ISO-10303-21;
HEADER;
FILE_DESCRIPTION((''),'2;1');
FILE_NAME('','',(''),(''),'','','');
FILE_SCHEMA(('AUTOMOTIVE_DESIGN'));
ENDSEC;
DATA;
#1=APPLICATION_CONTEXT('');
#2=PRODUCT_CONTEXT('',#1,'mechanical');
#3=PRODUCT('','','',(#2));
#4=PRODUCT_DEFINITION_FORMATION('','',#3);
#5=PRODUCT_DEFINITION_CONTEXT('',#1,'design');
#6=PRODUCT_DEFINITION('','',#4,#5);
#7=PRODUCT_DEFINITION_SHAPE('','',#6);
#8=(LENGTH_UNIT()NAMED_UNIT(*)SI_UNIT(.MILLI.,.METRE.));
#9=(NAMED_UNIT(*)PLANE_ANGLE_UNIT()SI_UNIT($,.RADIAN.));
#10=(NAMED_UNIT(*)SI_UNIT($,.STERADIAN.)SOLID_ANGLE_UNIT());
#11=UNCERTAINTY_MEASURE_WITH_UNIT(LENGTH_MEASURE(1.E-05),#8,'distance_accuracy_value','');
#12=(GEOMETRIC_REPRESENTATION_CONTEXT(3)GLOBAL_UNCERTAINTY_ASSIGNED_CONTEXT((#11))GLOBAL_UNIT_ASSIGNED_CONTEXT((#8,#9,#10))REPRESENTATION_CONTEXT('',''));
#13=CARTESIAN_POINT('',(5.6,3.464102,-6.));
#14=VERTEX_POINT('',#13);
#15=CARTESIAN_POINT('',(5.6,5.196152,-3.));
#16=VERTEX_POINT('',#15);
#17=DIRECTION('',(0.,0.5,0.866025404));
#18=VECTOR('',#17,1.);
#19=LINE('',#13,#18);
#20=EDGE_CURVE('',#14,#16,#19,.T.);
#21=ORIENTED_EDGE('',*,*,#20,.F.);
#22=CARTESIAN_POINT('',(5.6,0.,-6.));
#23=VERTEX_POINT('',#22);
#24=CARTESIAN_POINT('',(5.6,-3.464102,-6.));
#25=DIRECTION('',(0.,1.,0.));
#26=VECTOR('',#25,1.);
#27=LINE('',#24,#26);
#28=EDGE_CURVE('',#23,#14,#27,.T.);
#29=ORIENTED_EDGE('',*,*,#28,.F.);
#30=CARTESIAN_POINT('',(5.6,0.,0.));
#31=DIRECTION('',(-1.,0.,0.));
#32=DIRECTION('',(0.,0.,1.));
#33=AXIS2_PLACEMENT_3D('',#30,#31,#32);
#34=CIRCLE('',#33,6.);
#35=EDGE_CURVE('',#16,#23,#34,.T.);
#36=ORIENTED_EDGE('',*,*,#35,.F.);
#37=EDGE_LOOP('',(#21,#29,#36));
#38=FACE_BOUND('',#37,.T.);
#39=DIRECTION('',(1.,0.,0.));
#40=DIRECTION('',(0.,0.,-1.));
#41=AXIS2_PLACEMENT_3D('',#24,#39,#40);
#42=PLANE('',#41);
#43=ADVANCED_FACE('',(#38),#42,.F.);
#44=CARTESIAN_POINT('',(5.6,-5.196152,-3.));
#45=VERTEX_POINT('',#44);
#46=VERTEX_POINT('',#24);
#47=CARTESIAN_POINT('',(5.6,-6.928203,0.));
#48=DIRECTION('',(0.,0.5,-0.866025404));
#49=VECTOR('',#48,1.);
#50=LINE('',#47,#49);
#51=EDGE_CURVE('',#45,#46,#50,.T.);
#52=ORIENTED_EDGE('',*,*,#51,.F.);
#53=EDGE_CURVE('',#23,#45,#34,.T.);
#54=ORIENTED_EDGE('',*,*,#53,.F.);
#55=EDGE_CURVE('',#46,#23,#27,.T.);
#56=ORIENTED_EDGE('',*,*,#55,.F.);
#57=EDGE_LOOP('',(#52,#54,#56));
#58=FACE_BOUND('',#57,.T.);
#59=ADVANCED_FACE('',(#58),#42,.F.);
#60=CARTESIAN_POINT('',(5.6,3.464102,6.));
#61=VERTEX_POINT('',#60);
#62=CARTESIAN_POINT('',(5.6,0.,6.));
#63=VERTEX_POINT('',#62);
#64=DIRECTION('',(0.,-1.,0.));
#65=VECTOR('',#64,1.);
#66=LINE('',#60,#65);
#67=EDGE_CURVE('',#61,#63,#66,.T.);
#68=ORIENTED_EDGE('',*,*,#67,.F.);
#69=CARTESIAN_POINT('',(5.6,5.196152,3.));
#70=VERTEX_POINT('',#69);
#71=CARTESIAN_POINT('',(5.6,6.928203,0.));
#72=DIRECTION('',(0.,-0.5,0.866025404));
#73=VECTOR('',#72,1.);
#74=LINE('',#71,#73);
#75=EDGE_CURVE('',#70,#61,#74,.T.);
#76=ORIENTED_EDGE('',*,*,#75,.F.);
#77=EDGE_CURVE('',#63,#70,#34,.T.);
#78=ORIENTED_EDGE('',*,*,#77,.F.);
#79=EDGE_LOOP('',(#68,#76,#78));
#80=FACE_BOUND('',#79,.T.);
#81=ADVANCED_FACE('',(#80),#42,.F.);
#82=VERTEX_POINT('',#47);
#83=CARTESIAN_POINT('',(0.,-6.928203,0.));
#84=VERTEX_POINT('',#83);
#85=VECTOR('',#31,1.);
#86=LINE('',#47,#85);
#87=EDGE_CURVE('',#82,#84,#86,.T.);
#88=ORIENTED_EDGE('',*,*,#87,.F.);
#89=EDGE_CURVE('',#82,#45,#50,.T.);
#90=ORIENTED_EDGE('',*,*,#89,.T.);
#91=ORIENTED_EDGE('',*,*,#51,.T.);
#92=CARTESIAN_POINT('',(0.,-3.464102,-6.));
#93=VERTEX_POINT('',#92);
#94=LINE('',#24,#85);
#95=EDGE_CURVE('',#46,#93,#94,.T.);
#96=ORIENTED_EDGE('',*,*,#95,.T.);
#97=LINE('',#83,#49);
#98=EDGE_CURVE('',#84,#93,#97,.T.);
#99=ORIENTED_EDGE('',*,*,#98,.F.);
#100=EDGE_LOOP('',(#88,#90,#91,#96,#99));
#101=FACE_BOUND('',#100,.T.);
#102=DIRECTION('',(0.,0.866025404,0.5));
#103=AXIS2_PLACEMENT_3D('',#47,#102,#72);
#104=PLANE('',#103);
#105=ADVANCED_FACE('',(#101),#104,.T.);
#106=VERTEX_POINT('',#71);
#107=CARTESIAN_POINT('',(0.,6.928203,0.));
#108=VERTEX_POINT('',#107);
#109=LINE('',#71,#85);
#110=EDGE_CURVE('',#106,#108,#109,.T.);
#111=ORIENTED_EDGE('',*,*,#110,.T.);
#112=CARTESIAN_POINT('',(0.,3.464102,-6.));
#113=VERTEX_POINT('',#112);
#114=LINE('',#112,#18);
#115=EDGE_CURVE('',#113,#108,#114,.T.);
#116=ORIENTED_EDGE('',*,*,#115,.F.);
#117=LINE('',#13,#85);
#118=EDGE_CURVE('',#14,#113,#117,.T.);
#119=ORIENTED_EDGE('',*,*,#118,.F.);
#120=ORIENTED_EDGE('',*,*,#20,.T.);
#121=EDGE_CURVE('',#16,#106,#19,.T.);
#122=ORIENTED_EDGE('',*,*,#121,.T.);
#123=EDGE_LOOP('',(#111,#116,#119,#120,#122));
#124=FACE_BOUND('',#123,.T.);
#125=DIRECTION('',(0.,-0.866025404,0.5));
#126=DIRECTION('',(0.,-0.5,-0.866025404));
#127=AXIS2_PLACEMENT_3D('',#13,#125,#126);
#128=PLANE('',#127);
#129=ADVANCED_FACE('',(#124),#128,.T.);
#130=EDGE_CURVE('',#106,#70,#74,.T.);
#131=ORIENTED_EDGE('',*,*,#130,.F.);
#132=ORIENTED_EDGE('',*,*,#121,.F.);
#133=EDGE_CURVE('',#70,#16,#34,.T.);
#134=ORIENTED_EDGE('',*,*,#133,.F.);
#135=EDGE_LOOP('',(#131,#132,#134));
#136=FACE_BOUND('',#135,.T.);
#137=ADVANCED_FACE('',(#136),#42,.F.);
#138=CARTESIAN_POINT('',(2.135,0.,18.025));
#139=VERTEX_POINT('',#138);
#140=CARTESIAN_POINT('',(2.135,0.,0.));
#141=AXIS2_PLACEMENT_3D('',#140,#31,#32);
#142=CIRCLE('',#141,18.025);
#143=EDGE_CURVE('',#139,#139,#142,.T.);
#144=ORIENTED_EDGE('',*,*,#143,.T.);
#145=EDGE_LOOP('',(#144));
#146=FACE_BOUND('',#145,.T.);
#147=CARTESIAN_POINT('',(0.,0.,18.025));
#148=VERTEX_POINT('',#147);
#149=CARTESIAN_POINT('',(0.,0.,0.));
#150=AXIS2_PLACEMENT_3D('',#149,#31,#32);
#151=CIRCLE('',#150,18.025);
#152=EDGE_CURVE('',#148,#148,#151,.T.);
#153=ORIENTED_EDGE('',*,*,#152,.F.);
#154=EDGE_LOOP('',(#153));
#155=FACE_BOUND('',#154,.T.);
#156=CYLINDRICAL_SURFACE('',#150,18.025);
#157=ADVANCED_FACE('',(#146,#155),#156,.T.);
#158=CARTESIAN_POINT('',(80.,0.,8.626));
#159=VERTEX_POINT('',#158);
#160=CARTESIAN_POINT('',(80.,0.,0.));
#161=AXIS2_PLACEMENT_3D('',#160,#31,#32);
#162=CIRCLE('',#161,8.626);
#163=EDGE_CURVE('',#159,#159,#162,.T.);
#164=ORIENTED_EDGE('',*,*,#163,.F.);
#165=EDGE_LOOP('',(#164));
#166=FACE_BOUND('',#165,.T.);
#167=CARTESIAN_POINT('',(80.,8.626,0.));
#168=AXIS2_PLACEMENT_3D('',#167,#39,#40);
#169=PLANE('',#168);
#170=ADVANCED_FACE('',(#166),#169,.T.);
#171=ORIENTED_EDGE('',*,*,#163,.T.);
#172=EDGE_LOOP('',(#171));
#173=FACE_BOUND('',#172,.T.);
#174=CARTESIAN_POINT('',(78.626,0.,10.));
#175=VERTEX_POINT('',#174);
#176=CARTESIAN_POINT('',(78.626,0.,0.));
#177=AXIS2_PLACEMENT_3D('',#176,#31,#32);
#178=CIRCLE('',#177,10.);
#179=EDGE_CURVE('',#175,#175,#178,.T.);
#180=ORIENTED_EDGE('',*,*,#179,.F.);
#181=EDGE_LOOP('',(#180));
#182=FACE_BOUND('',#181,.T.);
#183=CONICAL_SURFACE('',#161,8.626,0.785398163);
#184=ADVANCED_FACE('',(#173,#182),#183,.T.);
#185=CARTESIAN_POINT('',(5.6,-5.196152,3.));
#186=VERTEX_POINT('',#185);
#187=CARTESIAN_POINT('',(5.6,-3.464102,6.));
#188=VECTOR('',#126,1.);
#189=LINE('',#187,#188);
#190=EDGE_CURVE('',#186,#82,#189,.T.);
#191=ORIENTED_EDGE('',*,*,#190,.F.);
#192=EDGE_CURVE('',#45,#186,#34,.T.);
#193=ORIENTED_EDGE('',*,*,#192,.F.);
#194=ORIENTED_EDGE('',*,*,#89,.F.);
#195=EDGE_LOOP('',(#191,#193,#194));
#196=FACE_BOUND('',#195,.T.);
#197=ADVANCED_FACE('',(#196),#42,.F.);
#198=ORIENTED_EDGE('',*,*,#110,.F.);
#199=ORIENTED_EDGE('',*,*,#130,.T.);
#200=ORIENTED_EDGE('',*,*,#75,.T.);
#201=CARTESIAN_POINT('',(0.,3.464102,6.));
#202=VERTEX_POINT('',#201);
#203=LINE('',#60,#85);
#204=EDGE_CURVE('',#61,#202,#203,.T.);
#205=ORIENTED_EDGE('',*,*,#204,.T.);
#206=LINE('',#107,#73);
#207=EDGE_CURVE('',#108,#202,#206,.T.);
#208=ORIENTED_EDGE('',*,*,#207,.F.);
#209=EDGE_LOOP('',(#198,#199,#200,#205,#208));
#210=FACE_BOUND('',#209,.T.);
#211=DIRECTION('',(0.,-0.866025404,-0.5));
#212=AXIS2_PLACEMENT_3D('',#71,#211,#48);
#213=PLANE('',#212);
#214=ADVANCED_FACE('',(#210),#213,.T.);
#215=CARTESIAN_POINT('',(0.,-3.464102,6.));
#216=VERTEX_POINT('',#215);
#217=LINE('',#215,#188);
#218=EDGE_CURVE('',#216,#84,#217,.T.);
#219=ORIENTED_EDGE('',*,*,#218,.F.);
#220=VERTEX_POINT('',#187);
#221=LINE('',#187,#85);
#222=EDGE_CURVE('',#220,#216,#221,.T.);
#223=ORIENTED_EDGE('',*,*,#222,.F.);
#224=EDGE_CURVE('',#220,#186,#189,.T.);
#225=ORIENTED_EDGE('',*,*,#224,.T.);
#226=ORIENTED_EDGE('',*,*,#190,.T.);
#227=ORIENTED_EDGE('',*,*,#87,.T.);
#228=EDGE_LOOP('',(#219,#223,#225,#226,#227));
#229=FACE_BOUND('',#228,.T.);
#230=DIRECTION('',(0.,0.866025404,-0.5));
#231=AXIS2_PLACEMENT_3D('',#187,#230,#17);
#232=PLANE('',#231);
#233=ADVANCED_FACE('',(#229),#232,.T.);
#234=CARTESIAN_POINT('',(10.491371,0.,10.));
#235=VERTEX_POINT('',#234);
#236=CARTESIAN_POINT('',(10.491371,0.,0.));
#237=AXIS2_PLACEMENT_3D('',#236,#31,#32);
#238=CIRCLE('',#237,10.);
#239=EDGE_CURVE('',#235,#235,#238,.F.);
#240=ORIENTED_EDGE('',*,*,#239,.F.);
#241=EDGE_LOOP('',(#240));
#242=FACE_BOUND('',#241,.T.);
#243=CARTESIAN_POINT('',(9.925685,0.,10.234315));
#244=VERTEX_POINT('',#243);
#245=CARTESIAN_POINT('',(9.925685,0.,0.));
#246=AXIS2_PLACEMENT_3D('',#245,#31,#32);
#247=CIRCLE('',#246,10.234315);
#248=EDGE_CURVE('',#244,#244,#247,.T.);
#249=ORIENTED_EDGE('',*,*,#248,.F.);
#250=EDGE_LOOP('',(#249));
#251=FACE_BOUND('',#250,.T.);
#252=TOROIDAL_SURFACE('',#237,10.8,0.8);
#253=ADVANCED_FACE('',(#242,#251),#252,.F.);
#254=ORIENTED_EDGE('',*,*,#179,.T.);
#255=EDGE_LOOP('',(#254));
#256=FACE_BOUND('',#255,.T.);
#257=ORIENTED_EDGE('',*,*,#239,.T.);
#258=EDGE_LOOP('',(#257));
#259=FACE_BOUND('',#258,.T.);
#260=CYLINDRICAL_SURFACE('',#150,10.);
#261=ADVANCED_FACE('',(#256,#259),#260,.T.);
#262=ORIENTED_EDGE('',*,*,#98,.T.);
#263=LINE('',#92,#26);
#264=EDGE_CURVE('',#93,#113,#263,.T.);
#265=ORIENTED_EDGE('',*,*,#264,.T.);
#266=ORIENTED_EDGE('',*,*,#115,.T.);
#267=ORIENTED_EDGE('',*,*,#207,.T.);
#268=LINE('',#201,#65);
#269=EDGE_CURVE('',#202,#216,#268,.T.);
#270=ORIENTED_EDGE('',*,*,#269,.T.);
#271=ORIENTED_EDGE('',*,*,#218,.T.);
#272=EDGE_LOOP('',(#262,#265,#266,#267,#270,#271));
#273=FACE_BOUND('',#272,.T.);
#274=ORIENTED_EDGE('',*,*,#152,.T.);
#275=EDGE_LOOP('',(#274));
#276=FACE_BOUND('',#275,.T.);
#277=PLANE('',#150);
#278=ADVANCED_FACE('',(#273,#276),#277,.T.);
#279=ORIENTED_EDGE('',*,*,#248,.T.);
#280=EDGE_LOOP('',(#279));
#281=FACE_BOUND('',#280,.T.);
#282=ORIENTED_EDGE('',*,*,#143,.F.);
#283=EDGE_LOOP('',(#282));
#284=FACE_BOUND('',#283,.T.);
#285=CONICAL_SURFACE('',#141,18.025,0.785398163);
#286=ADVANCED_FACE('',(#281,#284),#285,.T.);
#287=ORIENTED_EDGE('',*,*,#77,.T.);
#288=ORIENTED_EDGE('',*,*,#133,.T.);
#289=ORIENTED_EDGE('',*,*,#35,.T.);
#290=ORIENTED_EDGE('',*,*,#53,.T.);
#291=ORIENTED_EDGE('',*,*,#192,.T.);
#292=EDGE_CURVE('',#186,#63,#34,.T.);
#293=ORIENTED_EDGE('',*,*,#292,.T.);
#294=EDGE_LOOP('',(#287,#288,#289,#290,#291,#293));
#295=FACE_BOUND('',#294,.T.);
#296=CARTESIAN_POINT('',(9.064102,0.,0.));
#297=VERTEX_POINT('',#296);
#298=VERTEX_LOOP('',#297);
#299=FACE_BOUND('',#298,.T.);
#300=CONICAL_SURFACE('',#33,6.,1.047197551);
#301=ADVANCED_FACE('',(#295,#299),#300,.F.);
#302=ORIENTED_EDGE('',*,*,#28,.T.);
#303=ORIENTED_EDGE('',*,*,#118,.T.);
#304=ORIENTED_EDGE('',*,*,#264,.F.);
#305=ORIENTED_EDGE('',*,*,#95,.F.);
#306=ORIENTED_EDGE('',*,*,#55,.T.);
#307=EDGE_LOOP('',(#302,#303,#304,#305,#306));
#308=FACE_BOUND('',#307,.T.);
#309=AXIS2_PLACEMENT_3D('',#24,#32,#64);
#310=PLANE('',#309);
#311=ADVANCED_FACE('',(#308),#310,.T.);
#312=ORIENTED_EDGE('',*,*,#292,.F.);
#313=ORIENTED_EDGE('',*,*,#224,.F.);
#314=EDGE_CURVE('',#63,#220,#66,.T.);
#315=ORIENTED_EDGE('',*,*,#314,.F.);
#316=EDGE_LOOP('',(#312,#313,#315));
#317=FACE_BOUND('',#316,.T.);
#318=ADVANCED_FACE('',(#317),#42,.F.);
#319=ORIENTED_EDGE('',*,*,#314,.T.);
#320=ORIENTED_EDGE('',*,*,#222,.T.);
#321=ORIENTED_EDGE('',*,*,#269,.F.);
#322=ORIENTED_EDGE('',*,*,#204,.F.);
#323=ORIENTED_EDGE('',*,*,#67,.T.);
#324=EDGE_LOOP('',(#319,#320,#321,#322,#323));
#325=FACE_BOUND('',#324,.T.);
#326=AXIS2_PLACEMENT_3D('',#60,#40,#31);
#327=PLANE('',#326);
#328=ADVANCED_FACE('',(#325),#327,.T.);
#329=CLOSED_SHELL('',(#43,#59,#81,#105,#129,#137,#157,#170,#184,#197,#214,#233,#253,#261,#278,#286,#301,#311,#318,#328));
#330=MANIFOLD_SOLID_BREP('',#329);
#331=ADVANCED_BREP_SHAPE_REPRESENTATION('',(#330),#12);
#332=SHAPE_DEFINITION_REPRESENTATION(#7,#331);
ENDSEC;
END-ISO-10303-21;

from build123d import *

# Parameters (mm, degrees)
FILLET1_R   = 0.8
HEX_START   = -5.6
HEX_2_DEPTH = 5.6


with BuildPart() as part:
    # BodySke → BaseBody (revolve)
    with BuildSketch(Plane.XY, mode=Mode.PRIVATE) as basebody_sk:
        Polygon((0, 0), (0, 18.025), (2.135, 18.025), (10.16, 10), (78.626, 10), (80, 8.626), (80, 0), align=None)
    revolve(basebody_sk.sketch.rotate(Axis((0, 0, 0), (1, 0, 0)), 90), axis=Axis((0, 0, 0), (1, 0, 0)))

    # Fillet1
    fillet1_edges = [part.edges().sort_by_distance(p)[0] for p in [
        (10.16, 0, -10),
    ]]
    fillet(fillet1_edges, radius=FILLET1_R)

    # Hex 2: read off the stored shape, not the designer's step
    # Hex 2 outline → Hex 2 (cut)
    with BuildSketch(Plane.ZY.offset(HEX_START)):
        Polygon((-6, -3.464101615), (0, -6.92820323), (6, -3.464101615), (6, 3.464101615), (0, 6.92820323), (-6, 3.464101615), align=None)
    extrude(amount=HEX_2_DEPTH, mode=Mode.SUBTRACT)

    # Hex 2 2 outline → Hex 2 2 (revolve, cut)
    with BuildSketch(Plane.YX):
        Polygon((6, 5.6), (0, 9.064101615), (0, 5.6), align=None)
    revolve(axis=Axis((0, 0, 0), (1, 0, 0)), mode=Mode.SUBTRACT)


solid = part.part
